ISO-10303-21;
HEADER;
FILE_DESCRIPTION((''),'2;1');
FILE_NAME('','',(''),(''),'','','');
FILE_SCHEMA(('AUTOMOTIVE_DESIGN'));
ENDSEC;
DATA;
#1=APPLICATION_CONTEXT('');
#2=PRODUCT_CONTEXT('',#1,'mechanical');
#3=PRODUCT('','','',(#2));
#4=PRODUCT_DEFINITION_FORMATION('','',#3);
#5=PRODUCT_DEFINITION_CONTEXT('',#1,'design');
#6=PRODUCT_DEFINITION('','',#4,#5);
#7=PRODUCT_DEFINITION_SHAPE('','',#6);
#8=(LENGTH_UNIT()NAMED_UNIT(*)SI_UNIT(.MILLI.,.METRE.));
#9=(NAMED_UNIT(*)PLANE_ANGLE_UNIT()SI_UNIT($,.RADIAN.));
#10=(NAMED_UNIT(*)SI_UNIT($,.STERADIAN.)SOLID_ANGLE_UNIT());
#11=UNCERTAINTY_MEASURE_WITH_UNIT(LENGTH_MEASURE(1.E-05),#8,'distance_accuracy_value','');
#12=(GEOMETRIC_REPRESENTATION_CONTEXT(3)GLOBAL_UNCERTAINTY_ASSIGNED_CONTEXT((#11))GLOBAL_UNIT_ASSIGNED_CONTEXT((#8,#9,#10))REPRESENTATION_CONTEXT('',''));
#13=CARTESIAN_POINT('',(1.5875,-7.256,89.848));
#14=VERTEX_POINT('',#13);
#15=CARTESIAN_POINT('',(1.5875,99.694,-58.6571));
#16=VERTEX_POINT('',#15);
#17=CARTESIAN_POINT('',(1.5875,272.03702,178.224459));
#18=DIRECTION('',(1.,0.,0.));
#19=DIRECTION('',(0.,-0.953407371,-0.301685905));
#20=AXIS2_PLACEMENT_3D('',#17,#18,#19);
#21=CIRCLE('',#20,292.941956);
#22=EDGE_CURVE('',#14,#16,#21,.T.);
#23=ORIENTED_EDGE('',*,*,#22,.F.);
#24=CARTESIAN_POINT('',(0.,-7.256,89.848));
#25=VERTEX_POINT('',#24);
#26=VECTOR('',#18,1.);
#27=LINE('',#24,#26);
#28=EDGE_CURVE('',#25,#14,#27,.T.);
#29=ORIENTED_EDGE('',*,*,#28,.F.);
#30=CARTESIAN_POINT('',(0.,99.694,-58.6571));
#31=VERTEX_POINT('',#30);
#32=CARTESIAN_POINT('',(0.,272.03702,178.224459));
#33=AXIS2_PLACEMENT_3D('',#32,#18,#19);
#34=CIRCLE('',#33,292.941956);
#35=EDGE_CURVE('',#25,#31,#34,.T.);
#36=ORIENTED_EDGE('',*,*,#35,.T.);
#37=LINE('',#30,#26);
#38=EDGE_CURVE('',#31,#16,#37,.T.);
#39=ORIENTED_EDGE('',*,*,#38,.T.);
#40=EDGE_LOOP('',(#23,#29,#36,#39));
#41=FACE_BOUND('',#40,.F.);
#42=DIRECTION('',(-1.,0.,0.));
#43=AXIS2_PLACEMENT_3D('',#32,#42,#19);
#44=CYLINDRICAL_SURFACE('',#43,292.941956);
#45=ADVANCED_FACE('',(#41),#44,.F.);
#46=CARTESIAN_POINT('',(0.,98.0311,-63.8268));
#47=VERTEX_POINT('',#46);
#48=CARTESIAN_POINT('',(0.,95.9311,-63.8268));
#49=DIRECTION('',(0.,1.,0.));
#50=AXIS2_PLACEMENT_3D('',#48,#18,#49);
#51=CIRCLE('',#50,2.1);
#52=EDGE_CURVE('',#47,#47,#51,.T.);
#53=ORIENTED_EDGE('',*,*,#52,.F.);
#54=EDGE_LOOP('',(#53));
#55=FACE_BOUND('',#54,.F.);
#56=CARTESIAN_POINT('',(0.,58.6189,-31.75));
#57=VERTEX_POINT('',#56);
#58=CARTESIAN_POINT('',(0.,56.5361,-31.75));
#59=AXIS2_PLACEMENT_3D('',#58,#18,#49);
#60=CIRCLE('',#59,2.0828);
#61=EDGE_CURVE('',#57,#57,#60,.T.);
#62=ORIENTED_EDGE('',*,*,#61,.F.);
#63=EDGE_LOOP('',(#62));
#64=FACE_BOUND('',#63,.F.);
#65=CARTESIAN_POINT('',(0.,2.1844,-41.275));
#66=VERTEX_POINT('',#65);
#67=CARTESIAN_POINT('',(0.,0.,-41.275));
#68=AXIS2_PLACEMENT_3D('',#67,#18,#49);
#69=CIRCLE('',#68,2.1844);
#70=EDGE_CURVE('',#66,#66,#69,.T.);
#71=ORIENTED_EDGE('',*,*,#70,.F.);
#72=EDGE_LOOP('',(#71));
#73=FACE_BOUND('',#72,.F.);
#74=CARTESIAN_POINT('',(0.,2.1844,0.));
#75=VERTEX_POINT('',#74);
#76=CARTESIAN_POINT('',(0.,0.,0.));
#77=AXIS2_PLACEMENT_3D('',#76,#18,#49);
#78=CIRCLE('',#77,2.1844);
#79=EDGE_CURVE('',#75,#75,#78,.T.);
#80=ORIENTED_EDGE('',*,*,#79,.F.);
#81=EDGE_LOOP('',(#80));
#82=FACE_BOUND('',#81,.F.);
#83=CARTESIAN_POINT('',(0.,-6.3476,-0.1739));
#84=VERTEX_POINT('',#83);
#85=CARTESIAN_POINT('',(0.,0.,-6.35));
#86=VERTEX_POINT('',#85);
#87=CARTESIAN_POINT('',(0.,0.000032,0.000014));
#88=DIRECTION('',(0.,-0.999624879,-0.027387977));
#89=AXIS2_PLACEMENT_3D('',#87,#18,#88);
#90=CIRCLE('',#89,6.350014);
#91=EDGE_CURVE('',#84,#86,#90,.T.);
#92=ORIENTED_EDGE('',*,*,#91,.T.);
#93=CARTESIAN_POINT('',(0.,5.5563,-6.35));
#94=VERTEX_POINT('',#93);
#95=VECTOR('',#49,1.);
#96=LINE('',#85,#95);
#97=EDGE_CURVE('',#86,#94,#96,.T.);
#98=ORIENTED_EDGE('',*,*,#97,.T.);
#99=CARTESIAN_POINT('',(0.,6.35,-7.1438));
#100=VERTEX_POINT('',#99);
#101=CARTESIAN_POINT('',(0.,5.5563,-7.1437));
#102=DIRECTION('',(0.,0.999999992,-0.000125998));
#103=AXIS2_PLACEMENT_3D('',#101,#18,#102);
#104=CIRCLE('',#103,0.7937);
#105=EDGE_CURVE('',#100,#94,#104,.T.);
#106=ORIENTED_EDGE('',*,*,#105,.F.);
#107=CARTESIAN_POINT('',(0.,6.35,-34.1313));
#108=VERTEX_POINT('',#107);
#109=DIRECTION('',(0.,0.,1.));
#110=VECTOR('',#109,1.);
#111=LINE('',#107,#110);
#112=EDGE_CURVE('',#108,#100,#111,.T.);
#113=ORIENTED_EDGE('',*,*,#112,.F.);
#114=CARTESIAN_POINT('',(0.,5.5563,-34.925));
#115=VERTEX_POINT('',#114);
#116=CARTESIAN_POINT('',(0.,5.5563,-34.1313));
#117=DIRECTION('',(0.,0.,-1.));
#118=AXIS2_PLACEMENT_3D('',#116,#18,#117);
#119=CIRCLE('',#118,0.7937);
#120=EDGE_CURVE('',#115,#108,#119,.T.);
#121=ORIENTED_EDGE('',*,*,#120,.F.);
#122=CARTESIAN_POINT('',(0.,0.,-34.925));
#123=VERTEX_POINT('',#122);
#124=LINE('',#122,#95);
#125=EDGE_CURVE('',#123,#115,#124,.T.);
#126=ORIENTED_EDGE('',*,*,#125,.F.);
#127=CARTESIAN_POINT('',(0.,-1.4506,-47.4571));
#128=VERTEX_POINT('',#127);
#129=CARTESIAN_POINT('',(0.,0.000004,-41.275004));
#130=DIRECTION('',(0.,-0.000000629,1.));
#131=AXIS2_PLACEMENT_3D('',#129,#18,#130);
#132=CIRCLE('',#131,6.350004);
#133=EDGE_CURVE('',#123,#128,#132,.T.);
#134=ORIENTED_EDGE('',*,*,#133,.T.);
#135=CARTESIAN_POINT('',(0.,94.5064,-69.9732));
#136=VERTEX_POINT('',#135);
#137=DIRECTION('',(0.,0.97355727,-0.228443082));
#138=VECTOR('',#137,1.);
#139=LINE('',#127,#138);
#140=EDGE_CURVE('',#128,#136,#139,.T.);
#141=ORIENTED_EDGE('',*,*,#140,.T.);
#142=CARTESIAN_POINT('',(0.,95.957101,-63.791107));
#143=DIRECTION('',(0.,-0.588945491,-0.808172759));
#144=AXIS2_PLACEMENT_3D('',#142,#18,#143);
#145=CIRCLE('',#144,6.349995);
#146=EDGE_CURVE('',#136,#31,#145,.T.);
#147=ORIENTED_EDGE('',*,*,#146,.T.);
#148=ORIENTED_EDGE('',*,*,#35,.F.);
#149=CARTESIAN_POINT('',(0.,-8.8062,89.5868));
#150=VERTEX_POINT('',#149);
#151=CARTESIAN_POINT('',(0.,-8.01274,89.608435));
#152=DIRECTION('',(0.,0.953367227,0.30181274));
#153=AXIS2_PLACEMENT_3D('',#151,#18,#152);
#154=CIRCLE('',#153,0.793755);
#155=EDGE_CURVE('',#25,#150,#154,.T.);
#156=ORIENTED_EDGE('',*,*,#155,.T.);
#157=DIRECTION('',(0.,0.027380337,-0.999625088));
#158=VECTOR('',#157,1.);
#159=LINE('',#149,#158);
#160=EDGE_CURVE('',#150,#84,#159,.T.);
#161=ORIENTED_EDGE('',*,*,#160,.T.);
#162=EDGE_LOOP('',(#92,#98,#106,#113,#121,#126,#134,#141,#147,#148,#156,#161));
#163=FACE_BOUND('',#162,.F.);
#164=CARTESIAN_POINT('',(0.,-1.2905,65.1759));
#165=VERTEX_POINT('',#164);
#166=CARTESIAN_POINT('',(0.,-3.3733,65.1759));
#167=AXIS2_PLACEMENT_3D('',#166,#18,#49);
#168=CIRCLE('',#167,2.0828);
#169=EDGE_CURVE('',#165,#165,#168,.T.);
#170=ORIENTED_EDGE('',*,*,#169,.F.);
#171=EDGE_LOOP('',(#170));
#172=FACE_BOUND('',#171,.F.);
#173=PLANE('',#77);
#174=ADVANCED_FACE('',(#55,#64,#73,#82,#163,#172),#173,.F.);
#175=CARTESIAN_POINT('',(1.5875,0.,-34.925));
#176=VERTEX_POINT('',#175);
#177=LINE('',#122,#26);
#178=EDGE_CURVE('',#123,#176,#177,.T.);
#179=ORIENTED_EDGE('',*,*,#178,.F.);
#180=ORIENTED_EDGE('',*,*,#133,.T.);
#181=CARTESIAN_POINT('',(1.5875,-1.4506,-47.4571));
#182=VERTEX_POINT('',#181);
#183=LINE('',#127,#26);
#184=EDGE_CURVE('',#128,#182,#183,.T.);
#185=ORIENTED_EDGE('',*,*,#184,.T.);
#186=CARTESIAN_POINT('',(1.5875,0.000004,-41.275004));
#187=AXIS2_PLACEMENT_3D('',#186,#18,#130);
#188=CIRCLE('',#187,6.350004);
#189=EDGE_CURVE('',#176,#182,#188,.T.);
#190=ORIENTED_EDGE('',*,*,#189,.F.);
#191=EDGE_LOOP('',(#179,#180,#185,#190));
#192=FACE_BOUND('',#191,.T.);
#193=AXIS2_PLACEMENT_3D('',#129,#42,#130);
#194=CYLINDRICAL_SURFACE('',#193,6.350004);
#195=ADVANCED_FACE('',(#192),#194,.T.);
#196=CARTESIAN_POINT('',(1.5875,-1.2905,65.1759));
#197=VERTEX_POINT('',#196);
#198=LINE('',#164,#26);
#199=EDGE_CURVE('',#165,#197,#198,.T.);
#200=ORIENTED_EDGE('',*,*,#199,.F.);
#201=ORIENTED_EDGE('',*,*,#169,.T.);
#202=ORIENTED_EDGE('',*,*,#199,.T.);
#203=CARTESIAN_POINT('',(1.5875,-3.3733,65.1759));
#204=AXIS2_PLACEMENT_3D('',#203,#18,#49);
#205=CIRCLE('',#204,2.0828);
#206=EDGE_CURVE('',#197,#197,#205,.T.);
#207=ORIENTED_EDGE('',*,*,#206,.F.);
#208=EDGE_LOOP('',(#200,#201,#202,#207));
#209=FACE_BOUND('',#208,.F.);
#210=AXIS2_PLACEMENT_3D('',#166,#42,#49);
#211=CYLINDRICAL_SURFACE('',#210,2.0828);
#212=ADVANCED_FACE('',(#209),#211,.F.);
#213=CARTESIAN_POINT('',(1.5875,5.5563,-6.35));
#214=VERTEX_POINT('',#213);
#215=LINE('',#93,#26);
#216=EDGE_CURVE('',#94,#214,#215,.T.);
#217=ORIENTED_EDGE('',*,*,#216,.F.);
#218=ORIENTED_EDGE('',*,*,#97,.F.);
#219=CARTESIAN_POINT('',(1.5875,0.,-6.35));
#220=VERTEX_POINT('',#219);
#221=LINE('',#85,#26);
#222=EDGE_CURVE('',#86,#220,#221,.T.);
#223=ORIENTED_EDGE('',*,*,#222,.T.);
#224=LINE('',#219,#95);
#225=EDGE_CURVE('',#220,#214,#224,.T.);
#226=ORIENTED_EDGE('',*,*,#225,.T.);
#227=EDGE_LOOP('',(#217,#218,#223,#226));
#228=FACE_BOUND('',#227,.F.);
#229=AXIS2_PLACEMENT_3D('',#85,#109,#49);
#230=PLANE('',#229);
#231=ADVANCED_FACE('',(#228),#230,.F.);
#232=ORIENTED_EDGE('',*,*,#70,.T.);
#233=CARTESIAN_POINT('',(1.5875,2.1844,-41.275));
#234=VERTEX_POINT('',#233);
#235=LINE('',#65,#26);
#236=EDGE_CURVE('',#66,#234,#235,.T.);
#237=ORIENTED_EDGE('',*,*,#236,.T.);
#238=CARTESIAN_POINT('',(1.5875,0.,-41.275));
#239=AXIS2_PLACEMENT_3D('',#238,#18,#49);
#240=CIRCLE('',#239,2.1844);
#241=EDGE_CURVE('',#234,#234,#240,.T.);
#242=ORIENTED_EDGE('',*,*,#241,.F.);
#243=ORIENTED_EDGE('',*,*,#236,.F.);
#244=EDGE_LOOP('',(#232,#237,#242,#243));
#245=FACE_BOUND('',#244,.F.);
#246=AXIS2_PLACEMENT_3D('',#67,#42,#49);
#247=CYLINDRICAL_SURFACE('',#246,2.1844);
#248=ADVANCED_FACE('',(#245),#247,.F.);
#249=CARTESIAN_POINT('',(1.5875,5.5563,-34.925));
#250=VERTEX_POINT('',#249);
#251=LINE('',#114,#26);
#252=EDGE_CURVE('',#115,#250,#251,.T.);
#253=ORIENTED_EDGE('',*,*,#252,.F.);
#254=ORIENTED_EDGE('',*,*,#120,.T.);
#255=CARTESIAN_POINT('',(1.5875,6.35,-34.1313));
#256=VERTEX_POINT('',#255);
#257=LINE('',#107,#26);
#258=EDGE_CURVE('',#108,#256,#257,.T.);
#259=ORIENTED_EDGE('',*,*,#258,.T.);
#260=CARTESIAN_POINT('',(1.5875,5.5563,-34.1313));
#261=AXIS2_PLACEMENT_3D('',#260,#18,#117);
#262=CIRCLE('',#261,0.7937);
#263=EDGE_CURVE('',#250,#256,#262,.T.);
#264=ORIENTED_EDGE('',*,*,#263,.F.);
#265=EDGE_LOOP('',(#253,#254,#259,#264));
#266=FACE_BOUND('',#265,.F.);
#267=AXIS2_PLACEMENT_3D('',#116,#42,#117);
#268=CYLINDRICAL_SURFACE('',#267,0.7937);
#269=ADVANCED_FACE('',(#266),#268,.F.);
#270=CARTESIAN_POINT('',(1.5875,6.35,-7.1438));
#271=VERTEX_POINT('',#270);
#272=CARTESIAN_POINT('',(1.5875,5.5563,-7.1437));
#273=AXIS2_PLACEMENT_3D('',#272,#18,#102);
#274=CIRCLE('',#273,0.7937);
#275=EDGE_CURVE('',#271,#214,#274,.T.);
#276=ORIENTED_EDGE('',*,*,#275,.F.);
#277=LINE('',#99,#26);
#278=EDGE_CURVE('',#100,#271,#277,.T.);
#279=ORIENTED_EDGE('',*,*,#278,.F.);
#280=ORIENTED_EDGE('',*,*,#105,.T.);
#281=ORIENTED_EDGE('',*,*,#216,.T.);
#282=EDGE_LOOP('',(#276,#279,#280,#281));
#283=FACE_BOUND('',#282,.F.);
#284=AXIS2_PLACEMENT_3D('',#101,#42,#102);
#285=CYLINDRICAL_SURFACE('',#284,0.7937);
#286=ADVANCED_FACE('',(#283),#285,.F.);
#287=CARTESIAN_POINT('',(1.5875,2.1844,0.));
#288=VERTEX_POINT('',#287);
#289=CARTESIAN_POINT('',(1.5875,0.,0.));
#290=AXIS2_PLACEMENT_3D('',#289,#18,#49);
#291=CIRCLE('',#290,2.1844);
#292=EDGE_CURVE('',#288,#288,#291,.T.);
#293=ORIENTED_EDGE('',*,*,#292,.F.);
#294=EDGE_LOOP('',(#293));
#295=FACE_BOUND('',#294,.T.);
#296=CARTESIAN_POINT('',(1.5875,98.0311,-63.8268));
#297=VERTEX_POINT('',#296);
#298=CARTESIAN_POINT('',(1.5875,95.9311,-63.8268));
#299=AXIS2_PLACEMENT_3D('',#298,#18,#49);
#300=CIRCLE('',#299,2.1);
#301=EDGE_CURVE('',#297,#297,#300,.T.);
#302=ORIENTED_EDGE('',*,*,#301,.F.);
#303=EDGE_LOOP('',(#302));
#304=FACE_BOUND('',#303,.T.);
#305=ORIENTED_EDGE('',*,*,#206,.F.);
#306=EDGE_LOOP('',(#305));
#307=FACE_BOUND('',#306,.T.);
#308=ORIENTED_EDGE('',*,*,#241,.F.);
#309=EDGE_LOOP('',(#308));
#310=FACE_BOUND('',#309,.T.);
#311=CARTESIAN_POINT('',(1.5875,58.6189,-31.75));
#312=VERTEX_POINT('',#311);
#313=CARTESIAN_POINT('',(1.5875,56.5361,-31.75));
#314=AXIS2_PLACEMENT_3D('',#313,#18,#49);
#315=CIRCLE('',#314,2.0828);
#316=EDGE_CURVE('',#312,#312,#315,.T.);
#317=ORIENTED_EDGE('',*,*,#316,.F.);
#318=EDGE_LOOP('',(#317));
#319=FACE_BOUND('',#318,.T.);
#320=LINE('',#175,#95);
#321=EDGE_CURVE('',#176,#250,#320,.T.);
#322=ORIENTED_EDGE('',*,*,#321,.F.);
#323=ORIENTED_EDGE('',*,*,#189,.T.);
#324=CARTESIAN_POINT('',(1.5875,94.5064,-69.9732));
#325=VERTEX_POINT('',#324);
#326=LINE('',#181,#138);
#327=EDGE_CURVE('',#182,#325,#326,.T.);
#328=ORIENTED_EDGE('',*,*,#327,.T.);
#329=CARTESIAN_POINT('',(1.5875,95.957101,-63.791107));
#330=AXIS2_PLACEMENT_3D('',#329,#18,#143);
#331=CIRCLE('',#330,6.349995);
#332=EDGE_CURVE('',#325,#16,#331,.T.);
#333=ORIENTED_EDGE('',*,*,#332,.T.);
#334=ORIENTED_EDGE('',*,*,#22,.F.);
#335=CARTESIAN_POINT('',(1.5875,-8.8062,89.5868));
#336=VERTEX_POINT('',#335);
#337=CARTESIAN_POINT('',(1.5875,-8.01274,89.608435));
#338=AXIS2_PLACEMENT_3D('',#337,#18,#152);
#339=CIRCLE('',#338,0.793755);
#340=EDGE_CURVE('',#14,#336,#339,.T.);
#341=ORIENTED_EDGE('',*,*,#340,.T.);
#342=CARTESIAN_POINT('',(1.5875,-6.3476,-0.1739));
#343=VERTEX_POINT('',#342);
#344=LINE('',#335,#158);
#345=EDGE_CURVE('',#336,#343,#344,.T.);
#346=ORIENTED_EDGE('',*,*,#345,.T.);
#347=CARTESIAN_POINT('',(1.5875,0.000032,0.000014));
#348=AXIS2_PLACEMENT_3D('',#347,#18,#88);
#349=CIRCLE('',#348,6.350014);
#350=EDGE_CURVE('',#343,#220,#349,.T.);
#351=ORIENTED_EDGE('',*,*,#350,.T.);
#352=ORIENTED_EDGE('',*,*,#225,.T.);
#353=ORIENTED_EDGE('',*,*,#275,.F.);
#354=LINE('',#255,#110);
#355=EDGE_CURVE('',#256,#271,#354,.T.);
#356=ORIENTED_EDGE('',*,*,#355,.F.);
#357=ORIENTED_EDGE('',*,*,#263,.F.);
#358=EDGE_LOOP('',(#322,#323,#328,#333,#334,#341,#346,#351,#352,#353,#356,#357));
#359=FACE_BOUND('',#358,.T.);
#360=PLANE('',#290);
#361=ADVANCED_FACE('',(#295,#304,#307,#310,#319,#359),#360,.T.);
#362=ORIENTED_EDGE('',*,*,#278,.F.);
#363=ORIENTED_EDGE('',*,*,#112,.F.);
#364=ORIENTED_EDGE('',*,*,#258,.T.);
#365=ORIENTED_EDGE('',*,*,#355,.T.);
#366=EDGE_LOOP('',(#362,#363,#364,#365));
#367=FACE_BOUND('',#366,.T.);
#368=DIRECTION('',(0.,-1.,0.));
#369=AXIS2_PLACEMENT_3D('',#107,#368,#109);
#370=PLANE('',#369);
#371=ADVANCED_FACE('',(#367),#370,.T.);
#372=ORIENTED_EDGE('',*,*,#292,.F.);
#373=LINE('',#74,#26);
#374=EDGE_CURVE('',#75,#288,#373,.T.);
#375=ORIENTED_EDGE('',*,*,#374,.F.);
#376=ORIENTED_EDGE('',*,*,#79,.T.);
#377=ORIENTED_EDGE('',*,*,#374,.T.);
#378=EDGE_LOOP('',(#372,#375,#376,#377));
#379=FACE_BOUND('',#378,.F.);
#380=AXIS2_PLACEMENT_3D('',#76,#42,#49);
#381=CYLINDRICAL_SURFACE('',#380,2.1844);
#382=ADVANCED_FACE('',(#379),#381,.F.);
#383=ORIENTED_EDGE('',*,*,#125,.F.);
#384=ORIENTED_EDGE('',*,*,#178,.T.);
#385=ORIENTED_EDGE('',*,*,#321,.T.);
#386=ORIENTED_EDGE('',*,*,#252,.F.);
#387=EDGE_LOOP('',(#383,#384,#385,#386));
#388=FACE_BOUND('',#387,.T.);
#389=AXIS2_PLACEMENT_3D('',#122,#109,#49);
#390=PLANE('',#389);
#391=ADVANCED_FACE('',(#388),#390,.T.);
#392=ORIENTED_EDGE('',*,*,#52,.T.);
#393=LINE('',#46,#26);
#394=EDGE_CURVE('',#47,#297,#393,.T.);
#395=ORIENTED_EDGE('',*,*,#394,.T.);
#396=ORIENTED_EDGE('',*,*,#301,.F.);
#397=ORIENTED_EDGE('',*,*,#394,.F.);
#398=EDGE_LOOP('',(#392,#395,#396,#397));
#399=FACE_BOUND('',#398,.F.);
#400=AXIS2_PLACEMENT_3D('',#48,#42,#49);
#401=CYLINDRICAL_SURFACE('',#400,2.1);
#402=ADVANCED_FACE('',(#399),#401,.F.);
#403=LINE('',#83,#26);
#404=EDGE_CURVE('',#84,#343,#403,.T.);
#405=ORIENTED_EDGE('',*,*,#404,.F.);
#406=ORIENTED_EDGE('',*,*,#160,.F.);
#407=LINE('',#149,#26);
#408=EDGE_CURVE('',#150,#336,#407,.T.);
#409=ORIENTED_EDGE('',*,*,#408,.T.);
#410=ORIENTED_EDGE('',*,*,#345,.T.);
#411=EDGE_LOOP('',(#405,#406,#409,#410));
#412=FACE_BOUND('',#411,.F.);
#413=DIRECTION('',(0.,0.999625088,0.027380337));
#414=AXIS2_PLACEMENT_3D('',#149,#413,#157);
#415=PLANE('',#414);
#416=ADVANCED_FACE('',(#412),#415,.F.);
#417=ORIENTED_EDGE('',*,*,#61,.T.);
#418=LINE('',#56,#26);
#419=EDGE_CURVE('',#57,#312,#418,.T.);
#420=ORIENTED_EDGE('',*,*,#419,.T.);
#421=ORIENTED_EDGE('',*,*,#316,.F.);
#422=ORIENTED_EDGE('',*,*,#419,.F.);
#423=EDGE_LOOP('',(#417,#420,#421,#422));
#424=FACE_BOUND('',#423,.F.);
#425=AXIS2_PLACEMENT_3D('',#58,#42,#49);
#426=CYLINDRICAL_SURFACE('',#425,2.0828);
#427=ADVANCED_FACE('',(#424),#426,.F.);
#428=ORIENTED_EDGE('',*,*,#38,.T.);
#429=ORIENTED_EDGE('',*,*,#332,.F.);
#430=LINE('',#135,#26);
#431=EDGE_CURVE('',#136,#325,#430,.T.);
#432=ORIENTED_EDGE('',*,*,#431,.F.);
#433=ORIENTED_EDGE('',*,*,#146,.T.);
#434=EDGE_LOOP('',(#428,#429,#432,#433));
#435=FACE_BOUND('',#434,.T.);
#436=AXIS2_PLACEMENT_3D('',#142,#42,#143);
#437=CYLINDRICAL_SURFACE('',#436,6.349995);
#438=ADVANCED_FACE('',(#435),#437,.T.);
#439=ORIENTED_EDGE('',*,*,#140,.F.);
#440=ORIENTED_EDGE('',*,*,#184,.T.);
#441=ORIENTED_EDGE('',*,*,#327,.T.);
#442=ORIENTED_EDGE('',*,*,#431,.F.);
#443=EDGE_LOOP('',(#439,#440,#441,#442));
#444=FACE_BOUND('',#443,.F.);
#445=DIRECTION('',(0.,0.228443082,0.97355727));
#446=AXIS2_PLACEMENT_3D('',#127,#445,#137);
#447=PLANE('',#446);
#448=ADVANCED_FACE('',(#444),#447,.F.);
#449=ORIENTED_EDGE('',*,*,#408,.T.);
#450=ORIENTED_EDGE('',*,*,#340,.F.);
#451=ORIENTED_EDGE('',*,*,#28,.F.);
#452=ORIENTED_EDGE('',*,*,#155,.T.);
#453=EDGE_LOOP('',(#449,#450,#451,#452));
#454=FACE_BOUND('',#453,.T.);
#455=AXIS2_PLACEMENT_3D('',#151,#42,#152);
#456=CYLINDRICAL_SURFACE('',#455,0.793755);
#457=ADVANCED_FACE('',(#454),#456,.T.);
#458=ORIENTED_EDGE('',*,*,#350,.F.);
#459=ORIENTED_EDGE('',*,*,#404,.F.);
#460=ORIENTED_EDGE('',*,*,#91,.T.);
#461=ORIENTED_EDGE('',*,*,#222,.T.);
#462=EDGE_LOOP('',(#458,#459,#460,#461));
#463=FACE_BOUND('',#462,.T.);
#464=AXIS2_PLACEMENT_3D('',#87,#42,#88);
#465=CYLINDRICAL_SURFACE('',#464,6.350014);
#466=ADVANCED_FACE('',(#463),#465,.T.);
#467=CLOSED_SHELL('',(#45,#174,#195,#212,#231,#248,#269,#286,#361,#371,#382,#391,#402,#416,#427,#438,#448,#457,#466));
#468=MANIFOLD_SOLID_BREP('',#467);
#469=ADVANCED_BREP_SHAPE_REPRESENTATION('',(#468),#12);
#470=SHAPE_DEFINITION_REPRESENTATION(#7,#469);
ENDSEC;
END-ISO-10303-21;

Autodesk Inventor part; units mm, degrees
ref_plane "YZ Plane" through (0, 0, 0) normal (1, 0, 0) x (0, 1, 0)
ref_plane "XZ Plane" through (0, 0, 0) normal (0, 1, 0) x (-1, 0, 0)
ref_plane "XY Plane" through (0, 0, 0) normal (0, 0, 1) x (1, 0, 0)
sketch "main" plane through (0, 0, 0) normal (0, 0, 1) x (1, 0, 0)
  circle A0 centre (-191.7635, 49.9495) radius 2.1844
  circle A1 centre (-95.8324, -13.8772) radius 2.1
  arc A2 (-99.5462, -18.9735) -> (-92.0695, -8.7075) centre (-95.8064, -13.8415) ccw
  arc A3 (-198.1111, 49.7757) -> (-191.7635, 43.5995) centre (-191.7635, 49.9495) ccw
  line L0 (-200.5697, 139.5363) -> (-198.1111, 49.7757)
  arc A4 (-199.0195, 139.7975) -> (-92.0695, -8.7075) centre (80.274, 228.1743) ccw
  circle A5 centre (-195.1368, 115.1254) radius 2.0828
  line L1 (-191.7635, 43.5995) -> (-186.2072, 43.5995)
  arc A6 (-199.0195, 139.7975) -> (-200.5697, 139.5363) centre (-199.7762, 139.5581) ccw
  circle A7 centre (-135.2274, 18.1995) radius 2.0828
  circle A8 centre (-191.7635, 8.6745) radius 2.1844
  arc A9 (-191.7635, 15.0245) -> (-193.2141, 2.4924) centre (-191.7635, 8.6745) ccw
  line L2 (-185.4135, 15.8183) -> (-185.4135, 42.8058)
  line L3 (-191.7635, 15.0245) -> (-186.2072, 15.0245)
  arc A10 (-185.4135, 42.8058) -> (-186.2072, 43.5995) centre (-186.2072, 42.8058) ccw
  arc A11 (-186.2072, 15.0245) -> (-185.4135, 15.8183) centre (-186.2072, 15.8183) ccw
  line L4 (-193.2141, 2.4924) -> (-97.2571, -20.0236)
  point P0 (1.1251, 9.7944)
  point P1 (-200.7302, 145.398)
  dimension "d7" = 12.7
  dimension "d8" = 4.1656
  dimension "d9" = 6.35
  dimension "d11" = 0.7937
  dimension "d13" = 4.1656
  dimension "d15" = 12.7
  dimension "d16" = 0.7937
sketch "Sketch1" plane through (0, 0, 0) normal (1, 0, 0) x (0, 1, 0)
  circle A0 centre (0, 0) radius 2.1844
  circle A1 centre (95.9311, -63.8268) radius 2.1
  arc A2 (92.2173, -68.923) -> (99.694, -58.6571) centre (95.9571, -63.7911) ccw
  arc A3 (-6.3476, -0.1739) -> (0, -6.35) centre (0, 0) ccw
  line L0 (-8.8062, 89.5868) -> (-6.3476, -0.1739)
  arc A4 (-7.256, 89.848) -> (99.694, -58.6571) centre (272.0375, 178.2247) ccw
  circle A5 centre (-3.3733, 65.1759) radius 2.0828
  line L1 (0, -6.35) -> (5.5563, -6.35)
  arc A6 (-7.256, 89.848) -> (-8.8062, 89.5868) centre (-8.0127, 89.6085) ccw
  circle A7 centre (56.5361, -31.75) radius 2.0828
  circle A8 centre (0, -41.275) radius 2.1844
  arc A9 (0, -34.925) -> (-1.4506, -47.4571) centre (0, -41.275) ccw
  line L2 (6.35, -34.1313) -> (6.35, -7.1438)
  line L3 (0, -34.925) -> (5.5563, -34.925)
  arc A10 (6.35, -7.1438) -> (5.5563, -6.35) centre (5.5563, -7.1437) ccw
  arc A11 (5.5563, -34.925) -> (6.35, -34.1313) centre (5.5563, -34.1313) ccw
  line L4 (-1.4506, -47.4571) -> (94.5064, -69.9732)
extrude "Extrusion1" add sketch "Sketch1" along normal blind 1.5875
properties part number "ramp"
